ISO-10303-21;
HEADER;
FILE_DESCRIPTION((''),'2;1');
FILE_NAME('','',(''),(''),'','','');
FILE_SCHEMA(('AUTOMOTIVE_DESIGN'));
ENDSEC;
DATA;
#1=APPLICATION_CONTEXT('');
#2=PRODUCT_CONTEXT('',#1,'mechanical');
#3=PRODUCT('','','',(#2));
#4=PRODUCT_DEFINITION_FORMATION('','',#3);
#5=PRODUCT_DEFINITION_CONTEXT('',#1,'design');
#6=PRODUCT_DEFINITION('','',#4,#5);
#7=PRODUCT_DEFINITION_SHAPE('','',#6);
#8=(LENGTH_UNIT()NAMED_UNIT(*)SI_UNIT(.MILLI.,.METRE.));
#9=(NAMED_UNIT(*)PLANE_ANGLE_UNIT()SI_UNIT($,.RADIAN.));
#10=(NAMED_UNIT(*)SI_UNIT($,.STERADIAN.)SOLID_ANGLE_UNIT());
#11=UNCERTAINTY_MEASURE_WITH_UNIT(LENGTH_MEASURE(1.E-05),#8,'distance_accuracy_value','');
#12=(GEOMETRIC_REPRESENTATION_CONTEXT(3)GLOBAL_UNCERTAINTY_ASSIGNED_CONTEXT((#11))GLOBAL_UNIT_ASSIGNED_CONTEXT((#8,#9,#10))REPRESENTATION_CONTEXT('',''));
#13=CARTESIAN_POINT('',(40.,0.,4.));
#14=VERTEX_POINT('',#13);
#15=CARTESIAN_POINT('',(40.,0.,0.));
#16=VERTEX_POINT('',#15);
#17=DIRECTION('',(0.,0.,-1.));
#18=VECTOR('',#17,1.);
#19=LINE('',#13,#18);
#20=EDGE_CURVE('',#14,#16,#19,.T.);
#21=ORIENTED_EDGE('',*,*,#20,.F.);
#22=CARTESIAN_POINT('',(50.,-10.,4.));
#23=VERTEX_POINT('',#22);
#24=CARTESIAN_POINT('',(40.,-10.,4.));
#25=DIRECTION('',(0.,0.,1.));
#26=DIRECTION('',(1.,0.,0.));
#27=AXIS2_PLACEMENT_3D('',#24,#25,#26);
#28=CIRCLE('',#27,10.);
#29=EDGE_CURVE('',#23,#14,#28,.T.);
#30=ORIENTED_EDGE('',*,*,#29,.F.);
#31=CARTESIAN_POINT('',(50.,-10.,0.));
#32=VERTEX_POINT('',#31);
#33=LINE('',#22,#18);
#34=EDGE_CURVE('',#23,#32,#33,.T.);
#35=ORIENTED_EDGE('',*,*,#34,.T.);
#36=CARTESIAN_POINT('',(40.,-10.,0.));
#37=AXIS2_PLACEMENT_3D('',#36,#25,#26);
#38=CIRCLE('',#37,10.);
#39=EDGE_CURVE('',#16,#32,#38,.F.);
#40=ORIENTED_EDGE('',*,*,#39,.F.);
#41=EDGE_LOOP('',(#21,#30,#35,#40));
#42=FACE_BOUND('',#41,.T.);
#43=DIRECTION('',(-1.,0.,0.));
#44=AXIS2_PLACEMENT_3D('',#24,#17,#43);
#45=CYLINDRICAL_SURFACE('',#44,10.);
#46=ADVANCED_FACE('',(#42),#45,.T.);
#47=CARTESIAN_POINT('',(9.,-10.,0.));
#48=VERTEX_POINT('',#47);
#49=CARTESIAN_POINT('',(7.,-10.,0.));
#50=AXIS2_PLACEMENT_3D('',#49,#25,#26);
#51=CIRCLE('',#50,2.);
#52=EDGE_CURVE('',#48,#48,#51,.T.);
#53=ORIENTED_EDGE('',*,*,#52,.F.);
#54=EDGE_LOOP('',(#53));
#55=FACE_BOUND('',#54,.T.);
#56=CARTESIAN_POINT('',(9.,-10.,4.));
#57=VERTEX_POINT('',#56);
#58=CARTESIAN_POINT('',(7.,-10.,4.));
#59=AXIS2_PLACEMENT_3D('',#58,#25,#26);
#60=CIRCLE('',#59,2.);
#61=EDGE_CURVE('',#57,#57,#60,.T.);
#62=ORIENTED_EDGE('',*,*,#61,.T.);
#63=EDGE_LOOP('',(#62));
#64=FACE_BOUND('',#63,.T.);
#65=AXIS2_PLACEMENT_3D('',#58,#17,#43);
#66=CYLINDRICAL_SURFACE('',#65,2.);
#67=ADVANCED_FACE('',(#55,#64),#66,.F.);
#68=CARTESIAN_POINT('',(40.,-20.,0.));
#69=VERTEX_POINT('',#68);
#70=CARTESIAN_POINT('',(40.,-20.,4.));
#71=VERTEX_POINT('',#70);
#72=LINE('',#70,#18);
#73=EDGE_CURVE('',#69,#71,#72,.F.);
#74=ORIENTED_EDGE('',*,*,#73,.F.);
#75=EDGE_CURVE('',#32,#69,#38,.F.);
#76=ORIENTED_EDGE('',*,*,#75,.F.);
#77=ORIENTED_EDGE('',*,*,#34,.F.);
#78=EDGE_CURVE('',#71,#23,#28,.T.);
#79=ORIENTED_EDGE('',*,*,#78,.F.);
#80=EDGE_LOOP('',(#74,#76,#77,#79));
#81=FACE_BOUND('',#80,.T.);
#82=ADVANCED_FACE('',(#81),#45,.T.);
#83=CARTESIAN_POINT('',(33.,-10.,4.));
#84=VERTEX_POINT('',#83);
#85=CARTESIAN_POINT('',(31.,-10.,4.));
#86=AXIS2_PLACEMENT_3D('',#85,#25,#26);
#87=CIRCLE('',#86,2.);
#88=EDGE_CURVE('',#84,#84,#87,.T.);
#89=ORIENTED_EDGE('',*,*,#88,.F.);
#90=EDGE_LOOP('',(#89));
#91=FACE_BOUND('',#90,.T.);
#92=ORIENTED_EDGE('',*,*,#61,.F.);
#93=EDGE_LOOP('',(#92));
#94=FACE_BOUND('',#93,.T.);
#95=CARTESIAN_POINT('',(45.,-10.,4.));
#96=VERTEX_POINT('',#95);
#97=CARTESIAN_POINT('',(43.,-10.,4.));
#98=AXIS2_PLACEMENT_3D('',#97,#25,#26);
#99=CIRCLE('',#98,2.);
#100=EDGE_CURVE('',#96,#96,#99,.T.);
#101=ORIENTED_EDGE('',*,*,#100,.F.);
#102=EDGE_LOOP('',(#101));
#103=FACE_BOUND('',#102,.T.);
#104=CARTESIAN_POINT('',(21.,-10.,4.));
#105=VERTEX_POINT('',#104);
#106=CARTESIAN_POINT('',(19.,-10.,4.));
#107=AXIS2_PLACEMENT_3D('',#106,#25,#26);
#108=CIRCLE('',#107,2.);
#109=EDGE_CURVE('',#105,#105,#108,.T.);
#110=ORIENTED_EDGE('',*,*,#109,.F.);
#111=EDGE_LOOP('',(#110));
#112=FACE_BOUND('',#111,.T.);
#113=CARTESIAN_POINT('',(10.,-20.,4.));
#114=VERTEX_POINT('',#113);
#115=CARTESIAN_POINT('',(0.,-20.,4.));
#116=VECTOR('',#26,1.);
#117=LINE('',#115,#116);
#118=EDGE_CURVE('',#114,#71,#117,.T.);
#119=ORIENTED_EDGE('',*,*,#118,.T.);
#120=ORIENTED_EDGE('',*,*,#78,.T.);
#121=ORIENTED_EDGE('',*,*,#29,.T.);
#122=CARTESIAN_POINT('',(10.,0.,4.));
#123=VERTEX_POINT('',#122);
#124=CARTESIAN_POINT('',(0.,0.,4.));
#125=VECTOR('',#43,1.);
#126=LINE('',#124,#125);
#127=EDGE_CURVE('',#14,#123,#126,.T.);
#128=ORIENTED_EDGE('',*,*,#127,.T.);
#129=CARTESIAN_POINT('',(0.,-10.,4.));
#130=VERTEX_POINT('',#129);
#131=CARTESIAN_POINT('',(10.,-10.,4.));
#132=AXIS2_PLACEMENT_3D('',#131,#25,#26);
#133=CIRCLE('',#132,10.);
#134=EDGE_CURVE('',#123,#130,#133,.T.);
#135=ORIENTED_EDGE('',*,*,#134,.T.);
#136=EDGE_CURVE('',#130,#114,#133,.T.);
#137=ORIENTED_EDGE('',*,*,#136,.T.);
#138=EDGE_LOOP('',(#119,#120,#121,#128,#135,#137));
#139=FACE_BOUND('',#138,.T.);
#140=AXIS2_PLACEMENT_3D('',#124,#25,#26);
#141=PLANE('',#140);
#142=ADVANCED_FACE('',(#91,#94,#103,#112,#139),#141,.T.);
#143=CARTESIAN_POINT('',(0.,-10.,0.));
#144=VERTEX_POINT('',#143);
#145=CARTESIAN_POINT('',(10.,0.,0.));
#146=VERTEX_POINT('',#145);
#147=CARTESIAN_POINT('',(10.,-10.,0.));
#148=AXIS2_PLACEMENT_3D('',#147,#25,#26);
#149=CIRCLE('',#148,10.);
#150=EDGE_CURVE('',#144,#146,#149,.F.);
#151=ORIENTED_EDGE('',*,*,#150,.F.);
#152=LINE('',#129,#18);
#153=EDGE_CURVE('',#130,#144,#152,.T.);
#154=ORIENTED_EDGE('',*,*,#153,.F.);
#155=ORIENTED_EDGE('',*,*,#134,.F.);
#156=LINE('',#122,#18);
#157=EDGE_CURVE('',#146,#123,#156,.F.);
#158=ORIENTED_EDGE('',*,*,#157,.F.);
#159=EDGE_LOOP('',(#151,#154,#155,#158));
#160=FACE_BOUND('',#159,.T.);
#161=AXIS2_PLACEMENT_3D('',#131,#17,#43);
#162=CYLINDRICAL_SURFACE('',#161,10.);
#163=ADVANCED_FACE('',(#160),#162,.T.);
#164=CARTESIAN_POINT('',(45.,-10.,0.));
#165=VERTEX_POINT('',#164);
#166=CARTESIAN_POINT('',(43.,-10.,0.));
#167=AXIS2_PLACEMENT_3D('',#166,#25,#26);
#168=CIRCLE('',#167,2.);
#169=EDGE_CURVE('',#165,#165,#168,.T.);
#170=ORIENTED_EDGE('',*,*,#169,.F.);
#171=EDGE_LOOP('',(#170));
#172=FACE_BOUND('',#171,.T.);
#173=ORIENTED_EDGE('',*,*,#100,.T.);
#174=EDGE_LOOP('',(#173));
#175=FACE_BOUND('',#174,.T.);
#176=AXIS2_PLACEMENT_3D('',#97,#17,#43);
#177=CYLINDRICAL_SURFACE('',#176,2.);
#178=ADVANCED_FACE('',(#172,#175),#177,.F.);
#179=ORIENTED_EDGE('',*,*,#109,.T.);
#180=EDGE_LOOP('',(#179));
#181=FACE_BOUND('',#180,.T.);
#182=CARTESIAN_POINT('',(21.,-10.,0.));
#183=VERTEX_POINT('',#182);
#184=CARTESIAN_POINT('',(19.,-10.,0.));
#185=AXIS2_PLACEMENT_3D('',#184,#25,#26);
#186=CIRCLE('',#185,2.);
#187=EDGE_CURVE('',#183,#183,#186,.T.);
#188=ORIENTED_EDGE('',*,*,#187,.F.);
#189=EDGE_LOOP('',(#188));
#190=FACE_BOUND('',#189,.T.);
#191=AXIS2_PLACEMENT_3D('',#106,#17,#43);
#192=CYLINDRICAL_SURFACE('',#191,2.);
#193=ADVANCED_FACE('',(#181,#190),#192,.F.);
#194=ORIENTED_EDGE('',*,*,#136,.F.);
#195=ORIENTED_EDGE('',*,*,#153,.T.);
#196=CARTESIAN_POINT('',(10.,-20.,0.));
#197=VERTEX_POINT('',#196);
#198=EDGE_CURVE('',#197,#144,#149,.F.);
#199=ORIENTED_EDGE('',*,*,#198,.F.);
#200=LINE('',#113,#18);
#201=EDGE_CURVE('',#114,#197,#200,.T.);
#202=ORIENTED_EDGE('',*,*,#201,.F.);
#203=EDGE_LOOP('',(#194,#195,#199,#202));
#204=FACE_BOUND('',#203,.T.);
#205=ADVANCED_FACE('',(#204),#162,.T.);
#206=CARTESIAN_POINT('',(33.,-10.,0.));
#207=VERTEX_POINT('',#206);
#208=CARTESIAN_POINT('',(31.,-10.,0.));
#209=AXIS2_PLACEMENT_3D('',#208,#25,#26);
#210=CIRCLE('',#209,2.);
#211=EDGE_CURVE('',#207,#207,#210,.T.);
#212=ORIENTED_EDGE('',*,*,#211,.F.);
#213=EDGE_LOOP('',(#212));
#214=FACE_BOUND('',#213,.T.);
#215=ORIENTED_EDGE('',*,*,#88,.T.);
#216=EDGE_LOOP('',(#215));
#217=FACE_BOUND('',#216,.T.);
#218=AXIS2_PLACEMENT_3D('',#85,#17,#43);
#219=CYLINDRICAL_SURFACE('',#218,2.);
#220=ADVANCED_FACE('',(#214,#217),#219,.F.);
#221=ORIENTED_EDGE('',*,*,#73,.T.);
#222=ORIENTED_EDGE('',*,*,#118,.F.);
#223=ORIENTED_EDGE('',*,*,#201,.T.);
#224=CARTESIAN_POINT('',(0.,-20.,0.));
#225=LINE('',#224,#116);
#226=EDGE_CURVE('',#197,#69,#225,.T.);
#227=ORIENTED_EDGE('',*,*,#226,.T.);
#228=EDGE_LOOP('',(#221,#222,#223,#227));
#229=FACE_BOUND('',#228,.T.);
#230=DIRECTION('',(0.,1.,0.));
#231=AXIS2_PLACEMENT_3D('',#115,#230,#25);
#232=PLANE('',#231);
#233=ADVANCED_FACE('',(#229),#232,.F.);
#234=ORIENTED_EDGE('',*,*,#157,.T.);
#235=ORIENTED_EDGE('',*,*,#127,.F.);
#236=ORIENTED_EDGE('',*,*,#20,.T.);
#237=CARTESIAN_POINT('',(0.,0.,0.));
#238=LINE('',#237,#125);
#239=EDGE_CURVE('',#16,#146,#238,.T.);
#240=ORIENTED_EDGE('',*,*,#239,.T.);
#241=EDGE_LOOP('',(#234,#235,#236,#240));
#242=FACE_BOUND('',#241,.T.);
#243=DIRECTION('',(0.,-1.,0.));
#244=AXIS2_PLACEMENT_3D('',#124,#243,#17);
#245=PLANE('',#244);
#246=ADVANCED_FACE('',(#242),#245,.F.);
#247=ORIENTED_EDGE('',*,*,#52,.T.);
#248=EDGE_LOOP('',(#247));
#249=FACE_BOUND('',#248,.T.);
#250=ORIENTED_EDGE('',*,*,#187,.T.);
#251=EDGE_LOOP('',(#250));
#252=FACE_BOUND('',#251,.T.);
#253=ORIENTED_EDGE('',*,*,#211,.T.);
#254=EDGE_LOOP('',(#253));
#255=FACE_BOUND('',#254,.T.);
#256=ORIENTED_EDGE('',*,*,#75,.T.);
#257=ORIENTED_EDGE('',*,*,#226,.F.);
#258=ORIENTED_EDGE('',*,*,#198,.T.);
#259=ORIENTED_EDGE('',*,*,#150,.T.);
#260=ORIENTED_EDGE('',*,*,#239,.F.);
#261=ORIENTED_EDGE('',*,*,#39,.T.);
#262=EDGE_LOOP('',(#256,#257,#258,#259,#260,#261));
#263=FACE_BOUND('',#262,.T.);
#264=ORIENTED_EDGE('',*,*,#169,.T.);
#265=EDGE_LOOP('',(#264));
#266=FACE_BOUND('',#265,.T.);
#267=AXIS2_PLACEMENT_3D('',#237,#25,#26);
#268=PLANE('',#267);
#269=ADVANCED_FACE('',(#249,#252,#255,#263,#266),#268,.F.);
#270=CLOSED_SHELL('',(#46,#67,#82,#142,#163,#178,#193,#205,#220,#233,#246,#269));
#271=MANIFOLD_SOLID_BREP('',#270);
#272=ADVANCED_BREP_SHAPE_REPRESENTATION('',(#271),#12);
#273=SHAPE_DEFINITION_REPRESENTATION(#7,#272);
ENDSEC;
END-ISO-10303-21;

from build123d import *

# Parameters (mm, degrees)
SKETCH_1_W      = 50
SKETCH_1_H      = 20
SKETCH_1_R      = 2
EXTRUDE_1_DEPTH = 4
FILLET_1_R      = 10


with BuildPart() as part:
    # 草图1 → 凸台-拉伸1 (new body)
    with BuildSketch(Plane.XY):
        with Locations((25, -10)):
            Rectangle(SKETCH_1_W, SKETCH_1_H)
        with Locations((7, -10)):
            Circle(SKETCH_1_R, mode=Mode.SUBTRACT)
        with Locations((19, -10)):
            Circle(SKETCH_1_R, mode=Mode.SUBTRACT)
        with Locations((31, -10)):
            Circle(SKETCH_1_R, mode=Mode.SUBTRACT)
        with Locations((43, -10)):
            Circle(SKETCH_1_R, mode=Mode.SUBTRACT)
    extrude(amount=EXTRUDE_1_DEPTH)

    # 圆角1
    fillet_1_edges = [part.edges().sort_by_distance(p)[0] for p in [
        (50, 0, 2),
        (50, -20, 2),
        (0, -20, 2),
        (0, 0, 2),
    ]]
    fillet(fillet_1_edges, radius=FILLET_1_R - 0.0001)  # a hair under: the kernel refuses the full size


solid = part.part
